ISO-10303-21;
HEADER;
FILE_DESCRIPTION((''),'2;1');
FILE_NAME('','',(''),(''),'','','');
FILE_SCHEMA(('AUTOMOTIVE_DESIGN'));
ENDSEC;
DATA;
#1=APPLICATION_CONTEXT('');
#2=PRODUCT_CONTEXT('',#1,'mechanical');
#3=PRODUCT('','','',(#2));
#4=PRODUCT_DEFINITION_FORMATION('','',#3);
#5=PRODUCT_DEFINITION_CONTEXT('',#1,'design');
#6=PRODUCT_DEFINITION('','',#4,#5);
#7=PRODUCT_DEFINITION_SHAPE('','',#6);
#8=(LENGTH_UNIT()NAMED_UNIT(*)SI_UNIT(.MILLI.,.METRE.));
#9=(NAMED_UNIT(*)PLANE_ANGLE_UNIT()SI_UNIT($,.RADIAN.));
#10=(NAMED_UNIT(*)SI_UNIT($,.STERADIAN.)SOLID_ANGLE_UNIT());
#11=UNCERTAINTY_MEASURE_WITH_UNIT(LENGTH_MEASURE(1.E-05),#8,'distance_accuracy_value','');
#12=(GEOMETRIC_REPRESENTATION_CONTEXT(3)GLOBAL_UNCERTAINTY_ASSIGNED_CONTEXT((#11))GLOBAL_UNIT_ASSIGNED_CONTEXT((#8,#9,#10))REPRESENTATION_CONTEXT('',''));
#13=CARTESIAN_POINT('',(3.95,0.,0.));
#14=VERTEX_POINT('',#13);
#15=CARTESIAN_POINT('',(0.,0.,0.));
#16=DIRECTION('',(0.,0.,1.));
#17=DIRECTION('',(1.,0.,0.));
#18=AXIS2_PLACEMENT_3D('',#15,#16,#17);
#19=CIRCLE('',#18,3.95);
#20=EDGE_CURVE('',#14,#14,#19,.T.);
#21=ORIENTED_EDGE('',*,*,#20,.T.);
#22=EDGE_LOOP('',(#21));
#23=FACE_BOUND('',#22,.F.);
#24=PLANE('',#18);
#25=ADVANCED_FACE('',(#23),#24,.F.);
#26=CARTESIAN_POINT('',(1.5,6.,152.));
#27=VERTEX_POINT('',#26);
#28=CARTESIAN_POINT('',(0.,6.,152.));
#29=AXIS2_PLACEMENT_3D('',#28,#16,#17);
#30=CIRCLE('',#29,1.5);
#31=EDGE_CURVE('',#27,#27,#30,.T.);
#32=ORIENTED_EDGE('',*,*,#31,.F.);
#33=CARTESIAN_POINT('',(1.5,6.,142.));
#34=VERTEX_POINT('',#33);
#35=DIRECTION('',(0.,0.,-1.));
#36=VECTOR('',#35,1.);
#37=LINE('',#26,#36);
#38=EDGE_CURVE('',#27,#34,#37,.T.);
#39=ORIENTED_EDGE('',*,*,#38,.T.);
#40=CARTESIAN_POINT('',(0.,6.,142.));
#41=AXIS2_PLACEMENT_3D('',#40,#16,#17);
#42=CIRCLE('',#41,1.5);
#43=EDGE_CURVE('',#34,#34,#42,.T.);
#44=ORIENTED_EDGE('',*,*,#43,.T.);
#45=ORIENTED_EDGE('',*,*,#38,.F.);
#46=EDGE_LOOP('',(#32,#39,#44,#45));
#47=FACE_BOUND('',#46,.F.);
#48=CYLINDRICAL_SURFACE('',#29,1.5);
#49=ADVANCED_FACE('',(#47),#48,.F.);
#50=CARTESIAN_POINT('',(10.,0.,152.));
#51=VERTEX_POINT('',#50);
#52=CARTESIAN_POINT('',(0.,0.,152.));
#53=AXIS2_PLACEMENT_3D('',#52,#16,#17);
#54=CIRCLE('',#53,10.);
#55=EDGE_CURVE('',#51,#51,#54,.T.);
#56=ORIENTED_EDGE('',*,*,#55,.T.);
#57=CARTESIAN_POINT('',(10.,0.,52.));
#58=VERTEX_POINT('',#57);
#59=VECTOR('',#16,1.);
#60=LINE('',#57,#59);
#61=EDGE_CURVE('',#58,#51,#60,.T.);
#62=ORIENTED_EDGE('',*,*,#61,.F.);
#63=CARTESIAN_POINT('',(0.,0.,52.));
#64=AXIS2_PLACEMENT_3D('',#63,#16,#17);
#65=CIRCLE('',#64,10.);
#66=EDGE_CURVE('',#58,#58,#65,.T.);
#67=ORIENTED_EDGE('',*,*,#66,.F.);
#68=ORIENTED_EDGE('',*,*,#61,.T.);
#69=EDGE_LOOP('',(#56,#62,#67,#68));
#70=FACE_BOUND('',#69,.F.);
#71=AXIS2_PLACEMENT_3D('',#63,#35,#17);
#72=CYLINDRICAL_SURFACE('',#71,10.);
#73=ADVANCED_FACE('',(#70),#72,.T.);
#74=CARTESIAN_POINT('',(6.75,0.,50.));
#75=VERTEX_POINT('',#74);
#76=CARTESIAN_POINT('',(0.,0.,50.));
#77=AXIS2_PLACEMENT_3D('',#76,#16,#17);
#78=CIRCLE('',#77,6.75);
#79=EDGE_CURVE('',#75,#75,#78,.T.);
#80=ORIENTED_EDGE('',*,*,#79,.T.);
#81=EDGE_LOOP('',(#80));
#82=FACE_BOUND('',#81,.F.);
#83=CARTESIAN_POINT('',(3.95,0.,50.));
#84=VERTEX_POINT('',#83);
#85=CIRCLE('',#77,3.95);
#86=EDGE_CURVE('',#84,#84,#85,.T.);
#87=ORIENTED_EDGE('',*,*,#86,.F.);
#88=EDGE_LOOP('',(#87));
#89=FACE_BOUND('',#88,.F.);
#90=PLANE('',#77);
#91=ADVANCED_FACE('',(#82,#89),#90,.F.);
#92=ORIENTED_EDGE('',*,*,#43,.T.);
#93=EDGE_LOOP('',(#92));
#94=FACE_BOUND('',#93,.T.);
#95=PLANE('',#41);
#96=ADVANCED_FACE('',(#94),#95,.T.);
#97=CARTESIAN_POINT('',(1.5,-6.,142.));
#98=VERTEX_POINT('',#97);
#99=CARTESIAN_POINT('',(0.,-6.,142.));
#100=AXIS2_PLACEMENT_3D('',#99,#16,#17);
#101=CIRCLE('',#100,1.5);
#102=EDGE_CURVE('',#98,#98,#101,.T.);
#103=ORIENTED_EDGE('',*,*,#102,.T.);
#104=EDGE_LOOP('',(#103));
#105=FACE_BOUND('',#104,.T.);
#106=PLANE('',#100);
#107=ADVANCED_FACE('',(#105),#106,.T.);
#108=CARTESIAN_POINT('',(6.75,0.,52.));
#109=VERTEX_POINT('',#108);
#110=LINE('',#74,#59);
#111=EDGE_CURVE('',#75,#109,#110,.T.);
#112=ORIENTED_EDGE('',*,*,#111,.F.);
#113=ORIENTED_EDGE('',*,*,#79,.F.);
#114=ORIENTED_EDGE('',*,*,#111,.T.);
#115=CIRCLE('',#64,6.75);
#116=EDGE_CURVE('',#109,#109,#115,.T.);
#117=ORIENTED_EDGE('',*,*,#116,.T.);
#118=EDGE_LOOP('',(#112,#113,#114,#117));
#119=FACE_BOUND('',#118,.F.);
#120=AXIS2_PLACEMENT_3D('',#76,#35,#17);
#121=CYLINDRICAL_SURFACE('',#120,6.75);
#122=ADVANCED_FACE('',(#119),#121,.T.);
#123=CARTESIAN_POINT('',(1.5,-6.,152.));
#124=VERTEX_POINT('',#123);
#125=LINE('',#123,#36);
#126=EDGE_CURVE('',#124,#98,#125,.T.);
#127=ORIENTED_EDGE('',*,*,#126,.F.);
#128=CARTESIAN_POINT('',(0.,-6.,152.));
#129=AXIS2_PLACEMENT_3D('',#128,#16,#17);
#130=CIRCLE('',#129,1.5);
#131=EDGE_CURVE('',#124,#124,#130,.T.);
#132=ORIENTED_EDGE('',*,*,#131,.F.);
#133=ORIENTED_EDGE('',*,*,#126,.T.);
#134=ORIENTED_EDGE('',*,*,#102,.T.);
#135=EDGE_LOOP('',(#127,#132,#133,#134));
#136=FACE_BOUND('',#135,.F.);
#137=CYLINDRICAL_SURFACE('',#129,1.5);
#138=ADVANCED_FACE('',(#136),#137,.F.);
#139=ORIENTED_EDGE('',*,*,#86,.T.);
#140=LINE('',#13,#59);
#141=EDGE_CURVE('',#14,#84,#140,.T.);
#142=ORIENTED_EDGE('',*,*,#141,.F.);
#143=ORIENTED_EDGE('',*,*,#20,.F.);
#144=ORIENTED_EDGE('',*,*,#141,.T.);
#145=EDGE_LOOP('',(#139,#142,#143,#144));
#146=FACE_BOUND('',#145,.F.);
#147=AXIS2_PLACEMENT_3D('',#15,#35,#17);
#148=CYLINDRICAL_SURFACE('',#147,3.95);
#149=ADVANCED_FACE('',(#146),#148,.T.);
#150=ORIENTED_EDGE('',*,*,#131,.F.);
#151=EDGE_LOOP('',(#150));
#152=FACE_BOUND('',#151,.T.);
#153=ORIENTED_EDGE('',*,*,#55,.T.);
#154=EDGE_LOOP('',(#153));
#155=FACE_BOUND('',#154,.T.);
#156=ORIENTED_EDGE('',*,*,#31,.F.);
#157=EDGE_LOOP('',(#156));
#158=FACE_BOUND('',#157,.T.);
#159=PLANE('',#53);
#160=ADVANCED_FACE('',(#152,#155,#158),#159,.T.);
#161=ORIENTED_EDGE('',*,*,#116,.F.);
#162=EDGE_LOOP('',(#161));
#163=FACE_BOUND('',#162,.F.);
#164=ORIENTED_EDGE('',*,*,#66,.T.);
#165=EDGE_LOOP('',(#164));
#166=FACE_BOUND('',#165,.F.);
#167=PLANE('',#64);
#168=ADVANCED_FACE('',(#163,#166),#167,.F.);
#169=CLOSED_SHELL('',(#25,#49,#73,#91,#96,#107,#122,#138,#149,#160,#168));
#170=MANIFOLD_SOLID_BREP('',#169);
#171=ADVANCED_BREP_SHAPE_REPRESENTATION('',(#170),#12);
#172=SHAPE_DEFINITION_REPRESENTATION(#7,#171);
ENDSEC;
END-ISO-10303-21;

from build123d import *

# Parameters (mm, degrees)
F0_R     = 3.95
F1_DEPTH = 50
F2_R     = 6.75
F2_R_2   = 3.95
F3_DEPTH = 2
F4_R     = 10
F4_R_2   = 6.75
F5_DEPTH = 100
F6_R     = 1.5
F7_DEPTH = 10


with BuildPart() as f1:
    # F0 (on Top) → F1 (new body)
    with BuildSketch(Plane.XY):
        Circle(F0_R)
    extrude(amount=F1_DEPTH)

    # F2 (on face) → F3 (join)
    with BuildSketch(Plane.XY.offset(50)):
        Circle(F2_R)
        Circle(F2_R_2, mode=Mode.SUBTRACT)
        Circle(F2_R_2)
    extrude(amount=F3_DEPTH)

    # F4 (on face) → F5 (join)
    with BuildSketch(Plane.XY.offset(52)):
        Circle(F4_R)
        Circle(F4_R_2, mode=Mode.SUBTRACT)
        Circle(F4_R_2)
    extrude(amount=F5_DEPTH)

    # F6 (on face) → F7 (cut)
    with BuildSketch(Plane.XY.offset(152)):
        with Locations((0, 6)):
            Circle(F6_R)
        with Locations((0, -6)):
            Circle(F6_R)
    extrude(amount=-F7_DEPTH, mode=Mode.SUBTRACT)


solid = f1.part
